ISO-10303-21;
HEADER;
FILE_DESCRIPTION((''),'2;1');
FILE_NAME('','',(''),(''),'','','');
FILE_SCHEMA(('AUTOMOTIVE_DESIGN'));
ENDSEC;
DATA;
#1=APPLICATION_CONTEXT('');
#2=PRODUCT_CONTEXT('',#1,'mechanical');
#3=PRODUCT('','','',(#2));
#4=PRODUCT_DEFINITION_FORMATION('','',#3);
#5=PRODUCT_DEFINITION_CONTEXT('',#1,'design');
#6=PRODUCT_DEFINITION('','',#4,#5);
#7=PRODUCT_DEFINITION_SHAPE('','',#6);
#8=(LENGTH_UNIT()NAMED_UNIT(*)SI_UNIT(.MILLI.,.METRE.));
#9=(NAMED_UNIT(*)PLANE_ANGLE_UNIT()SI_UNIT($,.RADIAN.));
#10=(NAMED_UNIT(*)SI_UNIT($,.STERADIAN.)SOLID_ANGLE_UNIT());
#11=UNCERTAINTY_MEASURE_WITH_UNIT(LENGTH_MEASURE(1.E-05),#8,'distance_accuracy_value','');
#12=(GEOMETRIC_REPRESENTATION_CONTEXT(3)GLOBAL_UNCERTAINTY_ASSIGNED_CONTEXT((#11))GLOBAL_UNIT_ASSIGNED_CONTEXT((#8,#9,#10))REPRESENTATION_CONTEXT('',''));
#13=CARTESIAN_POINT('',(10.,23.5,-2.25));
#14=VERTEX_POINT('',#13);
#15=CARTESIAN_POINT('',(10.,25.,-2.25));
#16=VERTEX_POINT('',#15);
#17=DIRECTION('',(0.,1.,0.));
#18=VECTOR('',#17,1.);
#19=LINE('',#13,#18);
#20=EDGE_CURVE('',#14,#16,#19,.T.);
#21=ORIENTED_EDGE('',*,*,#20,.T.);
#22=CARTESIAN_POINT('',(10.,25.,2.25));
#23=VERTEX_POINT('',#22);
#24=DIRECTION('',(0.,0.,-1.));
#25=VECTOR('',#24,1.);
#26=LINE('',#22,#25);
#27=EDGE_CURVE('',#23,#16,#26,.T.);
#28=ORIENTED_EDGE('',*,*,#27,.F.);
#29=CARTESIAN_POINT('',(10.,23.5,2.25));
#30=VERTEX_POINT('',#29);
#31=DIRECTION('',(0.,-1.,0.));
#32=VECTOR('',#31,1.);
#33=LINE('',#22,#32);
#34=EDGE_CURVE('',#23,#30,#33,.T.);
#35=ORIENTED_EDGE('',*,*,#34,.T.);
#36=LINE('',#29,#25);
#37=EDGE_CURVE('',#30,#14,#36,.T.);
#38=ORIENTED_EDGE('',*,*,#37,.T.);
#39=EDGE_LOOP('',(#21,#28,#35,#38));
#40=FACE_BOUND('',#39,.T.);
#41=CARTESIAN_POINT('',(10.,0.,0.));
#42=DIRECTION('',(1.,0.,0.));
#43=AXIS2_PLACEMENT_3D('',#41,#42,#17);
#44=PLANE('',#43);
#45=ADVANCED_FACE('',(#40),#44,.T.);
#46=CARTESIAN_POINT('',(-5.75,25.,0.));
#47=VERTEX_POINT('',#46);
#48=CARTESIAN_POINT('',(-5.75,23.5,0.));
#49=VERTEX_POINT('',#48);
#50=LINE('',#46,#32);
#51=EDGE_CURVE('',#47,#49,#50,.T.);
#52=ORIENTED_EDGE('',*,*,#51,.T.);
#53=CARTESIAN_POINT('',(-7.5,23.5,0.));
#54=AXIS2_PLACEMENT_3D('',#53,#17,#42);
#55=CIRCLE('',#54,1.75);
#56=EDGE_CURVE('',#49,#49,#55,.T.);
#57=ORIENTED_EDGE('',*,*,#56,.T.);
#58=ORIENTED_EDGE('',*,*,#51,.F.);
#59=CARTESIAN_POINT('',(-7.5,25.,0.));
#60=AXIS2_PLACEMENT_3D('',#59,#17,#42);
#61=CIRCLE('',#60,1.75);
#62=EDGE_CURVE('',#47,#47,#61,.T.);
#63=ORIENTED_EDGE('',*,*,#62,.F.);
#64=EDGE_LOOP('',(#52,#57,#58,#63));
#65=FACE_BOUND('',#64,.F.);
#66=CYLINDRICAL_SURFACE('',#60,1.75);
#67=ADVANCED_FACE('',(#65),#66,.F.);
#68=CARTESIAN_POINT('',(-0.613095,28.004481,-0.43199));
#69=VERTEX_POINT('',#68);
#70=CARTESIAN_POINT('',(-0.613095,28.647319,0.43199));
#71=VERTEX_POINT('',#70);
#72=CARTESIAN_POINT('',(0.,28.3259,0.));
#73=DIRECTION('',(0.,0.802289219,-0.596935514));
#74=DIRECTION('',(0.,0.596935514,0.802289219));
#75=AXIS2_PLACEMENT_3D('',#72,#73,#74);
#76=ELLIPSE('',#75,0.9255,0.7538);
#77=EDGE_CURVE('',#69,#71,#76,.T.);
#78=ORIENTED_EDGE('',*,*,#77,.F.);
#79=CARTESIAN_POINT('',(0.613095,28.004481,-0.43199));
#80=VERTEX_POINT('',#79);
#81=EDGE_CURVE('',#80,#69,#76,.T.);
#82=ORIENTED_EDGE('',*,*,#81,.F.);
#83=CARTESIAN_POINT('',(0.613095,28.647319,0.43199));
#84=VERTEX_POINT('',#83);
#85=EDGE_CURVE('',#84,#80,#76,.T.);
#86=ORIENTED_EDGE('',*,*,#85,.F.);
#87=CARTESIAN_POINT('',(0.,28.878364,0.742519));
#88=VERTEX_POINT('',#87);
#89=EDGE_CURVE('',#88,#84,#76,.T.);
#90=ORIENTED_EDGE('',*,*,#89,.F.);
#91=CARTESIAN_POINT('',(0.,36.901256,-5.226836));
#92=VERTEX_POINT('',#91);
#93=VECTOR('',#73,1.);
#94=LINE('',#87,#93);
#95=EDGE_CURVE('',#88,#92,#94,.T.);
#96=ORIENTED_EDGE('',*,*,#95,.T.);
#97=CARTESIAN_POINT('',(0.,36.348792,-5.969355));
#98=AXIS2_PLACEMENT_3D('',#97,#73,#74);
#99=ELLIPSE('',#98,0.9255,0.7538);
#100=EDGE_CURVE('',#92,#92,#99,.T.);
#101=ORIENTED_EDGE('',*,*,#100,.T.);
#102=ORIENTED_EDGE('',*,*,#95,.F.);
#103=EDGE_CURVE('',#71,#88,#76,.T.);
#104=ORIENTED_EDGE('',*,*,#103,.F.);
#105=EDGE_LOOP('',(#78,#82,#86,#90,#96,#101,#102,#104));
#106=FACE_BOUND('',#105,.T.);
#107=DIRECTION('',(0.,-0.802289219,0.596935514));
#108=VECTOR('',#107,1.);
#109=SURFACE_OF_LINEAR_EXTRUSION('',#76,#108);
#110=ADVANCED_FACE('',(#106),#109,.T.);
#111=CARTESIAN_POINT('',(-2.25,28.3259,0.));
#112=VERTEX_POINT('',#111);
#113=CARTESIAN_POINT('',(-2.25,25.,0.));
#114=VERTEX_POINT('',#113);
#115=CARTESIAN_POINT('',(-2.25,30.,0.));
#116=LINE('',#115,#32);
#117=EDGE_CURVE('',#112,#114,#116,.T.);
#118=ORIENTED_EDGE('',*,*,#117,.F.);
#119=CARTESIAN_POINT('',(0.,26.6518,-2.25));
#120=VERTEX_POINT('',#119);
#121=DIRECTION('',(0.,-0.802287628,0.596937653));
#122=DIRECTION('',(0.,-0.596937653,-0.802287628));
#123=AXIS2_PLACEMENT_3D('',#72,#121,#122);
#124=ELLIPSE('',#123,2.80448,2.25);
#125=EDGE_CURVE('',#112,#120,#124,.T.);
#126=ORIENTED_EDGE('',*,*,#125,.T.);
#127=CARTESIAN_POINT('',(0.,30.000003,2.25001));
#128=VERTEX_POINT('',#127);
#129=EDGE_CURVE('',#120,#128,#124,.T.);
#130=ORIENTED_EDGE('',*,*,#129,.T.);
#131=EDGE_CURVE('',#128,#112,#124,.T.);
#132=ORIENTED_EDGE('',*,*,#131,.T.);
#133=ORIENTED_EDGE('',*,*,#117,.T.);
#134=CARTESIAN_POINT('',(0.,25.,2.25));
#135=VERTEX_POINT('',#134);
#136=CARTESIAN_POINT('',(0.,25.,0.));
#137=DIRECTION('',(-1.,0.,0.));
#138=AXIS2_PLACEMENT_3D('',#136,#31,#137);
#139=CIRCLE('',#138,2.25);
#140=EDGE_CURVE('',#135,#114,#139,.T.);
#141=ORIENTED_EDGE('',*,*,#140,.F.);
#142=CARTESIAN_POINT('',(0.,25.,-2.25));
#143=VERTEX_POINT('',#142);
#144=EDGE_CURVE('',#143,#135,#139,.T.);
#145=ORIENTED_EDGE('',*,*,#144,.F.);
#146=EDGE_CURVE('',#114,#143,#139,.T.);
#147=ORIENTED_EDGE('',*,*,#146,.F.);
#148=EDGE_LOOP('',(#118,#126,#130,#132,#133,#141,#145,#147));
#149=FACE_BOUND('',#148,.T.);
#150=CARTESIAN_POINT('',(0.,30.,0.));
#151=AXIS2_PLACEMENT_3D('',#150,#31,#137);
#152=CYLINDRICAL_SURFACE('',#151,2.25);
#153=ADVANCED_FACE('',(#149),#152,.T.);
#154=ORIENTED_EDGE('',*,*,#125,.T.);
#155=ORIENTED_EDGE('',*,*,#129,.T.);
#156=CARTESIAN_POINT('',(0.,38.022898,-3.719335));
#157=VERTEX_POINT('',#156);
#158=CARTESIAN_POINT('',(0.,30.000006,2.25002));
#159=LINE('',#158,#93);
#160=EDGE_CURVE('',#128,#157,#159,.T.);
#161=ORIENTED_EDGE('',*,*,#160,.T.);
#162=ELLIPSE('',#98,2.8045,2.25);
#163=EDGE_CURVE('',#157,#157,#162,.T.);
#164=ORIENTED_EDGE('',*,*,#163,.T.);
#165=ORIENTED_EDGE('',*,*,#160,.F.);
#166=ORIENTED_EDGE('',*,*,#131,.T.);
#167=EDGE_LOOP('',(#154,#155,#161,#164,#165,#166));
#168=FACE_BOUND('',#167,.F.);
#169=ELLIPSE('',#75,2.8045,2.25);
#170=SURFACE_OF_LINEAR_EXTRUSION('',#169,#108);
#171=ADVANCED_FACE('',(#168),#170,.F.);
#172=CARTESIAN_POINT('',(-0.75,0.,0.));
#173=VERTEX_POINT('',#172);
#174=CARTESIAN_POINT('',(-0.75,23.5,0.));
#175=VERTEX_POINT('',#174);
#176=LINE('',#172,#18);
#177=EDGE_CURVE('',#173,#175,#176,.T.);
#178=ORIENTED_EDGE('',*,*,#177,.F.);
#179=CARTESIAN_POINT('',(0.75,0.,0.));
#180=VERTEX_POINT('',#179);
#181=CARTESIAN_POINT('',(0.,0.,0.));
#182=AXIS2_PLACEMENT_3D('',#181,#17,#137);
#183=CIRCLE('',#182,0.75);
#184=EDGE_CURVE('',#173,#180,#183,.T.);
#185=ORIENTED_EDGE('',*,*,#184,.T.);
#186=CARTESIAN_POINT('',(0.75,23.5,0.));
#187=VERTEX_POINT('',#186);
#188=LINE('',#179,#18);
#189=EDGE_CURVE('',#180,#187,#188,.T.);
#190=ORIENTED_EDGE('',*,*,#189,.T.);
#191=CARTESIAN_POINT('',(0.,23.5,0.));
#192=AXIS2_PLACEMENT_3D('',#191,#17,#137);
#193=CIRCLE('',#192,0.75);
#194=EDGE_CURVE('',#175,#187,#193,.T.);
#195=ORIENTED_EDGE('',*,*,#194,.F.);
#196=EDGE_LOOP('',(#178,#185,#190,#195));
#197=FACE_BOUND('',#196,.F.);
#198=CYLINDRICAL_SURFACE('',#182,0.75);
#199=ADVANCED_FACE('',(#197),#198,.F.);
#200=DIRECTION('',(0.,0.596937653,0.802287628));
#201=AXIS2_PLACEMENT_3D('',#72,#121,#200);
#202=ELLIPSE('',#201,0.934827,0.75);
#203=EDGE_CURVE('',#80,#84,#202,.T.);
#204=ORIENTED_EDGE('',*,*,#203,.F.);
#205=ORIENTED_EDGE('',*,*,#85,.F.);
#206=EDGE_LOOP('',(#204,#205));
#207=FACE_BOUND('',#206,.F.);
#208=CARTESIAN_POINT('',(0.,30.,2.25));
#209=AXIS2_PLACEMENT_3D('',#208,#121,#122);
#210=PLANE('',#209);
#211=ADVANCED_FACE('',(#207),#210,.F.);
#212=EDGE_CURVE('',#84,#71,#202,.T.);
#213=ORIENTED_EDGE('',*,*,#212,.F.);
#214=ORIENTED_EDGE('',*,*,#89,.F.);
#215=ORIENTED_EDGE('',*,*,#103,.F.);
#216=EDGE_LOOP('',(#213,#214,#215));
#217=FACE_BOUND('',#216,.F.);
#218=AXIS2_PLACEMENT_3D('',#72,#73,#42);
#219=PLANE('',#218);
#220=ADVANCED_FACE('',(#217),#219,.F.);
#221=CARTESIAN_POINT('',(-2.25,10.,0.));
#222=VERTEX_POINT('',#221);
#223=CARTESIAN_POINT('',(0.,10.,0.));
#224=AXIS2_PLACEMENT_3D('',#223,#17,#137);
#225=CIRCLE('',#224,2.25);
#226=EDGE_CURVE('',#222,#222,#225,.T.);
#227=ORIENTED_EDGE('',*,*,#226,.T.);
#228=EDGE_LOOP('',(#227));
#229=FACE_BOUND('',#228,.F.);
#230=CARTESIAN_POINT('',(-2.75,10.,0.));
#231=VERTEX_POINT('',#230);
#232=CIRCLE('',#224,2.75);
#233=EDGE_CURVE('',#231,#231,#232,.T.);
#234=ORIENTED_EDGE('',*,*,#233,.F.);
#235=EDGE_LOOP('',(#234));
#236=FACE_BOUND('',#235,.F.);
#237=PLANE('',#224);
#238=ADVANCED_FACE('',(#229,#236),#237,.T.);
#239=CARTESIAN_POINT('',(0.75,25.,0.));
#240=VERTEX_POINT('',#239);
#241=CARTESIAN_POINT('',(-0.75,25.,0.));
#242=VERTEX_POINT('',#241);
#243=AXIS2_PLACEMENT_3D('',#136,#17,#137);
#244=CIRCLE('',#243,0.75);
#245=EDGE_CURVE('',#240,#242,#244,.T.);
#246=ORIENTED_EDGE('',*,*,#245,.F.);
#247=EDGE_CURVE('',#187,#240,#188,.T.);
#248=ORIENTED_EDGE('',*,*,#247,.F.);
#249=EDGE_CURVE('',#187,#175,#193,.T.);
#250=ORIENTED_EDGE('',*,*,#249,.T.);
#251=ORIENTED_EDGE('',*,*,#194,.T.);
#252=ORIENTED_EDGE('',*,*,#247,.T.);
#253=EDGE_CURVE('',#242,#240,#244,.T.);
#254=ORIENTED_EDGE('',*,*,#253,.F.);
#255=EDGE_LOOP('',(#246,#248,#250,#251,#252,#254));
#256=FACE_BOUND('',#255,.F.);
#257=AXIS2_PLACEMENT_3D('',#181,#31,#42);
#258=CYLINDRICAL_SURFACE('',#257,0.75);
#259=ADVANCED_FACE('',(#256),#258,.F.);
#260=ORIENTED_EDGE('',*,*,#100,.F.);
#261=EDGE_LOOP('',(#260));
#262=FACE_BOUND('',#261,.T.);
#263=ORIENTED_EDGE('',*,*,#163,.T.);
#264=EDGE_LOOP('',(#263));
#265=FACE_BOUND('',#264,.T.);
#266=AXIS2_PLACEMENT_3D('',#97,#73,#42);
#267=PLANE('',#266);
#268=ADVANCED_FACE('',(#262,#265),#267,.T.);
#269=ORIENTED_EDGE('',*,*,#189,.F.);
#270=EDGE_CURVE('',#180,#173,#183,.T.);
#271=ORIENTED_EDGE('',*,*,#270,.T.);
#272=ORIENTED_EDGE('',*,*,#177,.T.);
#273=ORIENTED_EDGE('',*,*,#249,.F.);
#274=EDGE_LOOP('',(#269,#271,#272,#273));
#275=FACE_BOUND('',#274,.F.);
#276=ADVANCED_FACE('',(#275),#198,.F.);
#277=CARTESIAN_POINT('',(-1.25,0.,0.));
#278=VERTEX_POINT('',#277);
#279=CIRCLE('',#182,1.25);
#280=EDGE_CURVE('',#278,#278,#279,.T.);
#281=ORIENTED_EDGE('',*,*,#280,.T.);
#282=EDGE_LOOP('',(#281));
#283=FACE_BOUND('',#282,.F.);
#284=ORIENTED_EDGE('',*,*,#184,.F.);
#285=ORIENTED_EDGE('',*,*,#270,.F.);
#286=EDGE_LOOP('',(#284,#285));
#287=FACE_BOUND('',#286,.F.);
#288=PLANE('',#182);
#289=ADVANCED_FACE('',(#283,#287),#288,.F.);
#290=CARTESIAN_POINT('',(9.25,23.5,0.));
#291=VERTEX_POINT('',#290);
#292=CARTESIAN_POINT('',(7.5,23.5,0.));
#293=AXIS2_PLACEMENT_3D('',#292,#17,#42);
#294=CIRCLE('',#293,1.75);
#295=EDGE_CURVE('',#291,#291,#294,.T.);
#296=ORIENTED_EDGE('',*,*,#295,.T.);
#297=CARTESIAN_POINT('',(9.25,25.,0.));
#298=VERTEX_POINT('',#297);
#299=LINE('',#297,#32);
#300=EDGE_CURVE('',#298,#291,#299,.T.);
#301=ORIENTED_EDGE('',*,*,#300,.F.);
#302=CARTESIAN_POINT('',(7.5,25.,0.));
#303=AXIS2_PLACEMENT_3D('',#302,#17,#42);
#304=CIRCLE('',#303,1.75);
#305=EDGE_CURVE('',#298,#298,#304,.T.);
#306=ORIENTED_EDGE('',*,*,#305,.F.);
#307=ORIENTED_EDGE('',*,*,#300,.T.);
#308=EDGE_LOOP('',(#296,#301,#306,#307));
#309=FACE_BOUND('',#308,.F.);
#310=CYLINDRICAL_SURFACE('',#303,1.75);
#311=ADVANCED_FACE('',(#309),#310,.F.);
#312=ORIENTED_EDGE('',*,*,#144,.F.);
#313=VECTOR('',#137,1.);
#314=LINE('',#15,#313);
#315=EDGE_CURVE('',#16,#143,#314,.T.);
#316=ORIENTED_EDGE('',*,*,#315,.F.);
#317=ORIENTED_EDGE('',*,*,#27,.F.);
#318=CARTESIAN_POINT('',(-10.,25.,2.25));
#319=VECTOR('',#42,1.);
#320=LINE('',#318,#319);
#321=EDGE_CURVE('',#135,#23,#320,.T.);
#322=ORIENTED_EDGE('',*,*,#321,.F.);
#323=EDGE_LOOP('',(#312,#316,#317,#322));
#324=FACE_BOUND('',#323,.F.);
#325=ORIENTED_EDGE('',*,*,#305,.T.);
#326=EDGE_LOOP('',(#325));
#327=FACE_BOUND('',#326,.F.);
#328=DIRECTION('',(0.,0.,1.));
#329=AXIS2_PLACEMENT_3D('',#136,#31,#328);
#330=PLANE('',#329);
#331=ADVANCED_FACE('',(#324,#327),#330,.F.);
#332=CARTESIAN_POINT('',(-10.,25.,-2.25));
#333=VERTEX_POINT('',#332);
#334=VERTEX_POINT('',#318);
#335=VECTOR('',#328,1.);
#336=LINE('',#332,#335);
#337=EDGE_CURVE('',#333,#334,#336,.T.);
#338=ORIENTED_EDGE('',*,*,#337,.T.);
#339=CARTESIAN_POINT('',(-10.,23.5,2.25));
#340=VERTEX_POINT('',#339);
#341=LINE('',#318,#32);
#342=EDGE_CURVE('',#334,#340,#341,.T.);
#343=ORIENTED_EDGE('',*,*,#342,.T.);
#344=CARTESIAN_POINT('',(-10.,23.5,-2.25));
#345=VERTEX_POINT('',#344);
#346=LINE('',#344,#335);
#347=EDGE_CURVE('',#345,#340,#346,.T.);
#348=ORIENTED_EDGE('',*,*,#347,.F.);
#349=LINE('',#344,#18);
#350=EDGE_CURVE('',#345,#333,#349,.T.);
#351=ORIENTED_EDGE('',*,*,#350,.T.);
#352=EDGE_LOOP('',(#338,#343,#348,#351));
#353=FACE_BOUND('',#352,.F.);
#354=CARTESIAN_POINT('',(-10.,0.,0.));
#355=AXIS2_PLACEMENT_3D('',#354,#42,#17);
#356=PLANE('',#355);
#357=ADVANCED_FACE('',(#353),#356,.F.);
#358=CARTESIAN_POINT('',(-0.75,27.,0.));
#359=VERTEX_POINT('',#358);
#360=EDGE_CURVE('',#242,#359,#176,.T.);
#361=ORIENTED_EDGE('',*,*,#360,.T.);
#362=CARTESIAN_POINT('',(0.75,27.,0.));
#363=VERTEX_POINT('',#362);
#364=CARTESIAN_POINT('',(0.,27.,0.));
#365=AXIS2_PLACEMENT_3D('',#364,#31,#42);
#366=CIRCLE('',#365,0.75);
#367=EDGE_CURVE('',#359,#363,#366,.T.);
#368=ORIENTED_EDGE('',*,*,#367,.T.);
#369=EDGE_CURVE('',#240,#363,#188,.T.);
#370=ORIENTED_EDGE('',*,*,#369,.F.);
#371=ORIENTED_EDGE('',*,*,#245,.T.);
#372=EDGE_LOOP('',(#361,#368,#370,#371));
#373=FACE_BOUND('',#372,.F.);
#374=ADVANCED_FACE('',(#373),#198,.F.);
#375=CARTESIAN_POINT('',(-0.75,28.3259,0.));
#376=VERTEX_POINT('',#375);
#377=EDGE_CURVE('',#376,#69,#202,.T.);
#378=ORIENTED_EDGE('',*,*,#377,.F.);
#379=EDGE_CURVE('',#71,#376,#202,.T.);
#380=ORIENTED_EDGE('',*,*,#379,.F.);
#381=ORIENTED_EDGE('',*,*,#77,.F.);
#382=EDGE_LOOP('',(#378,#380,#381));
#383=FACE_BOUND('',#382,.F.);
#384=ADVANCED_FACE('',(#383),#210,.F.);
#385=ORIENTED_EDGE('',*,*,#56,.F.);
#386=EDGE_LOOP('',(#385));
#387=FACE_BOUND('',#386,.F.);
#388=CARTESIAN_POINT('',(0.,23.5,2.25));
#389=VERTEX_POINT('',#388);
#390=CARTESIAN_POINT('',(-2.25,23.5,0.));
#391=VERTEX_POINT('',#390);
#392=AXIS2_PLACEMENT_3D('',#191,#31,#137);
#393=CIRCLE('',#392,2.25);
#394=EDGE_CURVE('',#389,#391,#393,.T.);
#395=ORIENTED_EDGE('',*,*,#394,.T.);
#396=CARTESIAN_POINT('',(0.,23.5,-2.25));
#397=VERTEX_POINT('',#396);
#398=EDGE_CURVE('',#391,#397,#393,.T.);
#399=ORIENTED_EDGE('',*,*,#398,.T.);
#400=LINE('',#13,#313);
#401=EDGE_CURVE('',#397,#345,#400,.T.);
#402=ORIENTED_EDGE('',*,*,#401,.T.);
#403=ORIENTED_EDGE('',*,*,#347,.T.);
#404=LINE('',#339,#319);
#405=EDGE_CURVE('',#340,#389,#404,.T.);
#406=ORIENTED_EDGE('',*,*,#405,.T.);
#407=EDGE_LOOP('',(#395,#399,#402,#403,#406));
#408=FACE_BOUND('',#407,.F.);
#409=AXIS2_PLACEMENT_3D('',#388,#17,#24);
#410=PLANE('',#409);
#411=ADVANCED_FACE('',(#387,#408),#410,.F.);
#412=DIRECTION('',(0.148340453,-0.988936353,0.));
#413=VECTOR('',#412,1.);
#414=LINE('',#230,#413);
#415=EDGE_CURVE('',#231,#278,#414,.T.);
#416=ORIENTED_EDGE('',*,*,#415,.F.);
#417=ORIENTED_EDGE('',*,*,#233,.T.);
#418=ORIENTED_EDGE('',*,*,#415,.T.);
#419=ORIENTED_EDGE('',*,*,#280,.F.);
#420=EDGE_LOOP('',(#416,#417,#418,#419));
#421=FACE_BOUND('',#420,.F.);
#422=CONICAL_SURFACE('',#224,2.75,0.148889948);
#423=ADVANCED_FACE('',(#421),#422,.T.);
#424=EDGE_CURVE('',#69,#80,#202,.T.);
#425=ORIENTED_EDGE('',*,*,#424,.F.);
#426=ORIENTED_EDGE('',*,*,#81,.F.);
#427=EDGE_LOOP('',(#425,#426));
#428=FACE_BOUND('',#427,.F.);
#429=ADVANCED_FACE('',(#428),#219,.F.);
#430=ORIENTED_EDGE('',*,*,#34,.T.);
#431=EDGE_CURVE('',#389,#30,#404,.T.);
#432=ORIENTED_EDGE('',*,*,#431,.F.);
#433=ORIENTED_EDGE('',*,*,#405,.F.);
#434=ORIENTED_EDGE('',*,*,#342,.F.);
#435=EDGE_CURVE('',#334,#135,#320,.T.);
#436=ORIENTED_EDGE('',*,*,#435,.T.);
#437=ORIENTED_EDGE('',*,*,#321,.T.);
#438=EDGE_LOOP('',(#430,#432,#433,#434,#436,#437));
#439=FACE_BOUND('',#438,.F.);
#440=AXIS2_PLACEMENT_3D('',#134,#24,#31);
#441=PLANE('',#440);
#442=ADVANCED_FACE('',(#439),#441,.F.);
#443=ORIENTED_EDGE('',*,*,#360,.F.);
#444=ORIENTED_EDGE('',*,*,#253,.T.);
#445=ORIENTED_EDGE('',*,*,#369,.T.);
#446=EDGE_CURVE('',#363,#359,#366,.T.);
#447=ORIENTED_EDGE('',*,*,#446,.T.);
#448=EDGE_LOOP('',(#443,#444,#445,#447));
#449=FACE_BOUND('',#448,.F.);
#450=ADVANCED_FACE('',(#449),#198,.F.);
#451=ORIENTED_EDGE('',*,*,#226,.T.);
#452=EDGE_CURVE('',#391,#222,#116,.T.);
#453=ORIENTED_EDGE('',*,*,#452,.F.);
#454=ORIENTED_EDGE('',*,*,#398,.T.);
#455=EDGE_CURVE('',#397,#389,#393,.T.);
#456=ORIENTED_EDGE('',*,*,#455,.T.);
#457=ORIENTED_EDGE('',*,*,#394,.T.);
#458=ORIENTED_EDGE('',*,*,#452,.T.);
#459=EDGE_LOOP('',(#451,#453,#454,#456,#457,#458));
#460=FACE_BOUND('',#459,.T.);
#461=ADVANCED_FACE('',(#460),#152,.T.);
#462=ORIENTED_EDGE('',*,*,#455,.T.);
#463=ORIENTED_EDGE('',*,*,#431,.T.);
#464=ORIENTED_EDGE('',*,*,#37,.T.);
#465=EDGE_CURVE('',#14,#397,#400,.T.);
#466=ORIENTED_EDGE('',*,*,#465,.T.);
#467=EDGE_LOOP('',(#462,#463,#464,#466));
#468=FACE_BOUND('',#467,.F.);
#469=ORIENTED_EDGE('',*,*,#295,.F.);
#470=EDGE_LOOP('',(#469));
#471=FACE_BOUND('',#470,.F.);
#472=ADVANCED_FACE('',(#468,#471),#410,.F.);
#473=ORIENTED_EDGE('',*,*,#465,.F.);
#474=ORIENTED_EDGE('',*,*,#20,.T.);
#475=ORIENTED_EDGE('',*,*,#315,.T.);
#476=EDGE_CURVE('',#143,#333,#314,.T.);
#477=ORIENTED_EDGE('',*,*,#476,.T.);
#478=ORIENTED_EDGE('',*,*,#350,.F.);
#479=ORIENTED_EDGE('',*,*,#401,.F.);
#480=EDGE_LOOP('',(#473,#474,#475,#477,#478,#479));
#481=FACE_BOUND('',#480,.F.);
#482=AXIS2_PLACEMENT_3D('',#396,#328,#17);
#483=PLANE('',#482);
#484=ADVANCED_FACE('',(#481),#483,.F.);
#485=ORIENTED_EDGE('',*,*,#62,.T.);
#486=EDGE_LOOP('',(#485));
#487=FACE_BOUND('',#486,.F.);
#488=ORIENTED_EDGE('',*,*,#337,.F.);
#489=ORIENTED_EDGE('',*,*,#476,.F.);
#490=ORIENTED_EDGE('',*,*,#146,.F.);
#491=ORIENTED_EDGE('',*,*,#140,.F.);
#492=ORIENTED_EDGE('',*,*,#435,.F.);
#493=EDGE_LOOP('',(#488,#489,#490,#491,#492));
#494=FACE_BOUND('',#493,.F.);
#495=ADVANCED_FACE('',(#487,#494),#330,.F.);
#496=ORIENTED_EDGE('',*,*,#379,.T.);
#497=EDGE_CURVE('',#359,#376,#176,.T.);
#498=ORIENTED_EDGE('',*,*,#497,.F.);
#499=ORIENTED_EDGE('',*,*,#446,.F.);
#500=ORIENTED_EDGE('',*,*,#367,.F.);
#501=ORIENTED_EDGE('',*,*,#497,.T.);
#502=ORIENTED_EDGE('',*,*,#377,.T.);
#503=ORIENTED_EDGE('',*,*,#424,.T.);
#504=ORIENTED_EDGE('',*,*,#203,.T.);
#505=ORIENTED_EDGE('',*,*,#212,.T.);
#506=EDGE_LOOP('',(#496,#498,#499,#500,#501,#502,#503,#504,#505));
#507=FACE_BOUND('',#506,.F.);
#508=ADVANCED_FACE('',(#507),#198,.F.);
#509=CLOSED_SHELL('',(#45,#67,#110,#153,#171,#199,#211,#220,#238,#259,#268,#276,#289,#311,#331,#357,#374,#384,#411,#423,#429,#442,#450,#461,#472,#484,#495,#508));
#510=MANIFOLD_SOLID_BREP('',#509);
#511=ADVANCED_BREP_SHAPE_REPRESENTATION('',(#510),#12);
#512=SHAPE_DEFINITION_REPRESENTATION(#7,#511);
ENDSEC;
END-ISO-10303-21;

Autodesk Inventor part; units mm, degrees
ref_plane "YZ Plane" through (0, 0, 0) normal (1, 0, 0) x (0, 1, 0)
ref_plane "XY Plane" through (0, 0, 0) normal (0, 0, 1) x (1, 0, 0)
sketch "Skizze1" plane through (0, 0, 0) normal (0, 0, 1) x (1, 0, 0)
  line L0 (-3.3, 0) -> (0.55, 0) projected
  line L1 (0, -6) -> (0, 36) projected
  line L2 (-1.25, 0) -> (-0.75, 0)
  line L3 (-0.75, 0) -> (-0.75, 30)
  line L4 (-0.75, 30) -> (-2.25, 30)
  line L5 (-2.25, 30) -> (-2.25, 10)
  line L6 (-2.25, 10) -> (-2.75, 10)
  line L7 (-2.75, 10) -> (-1.25, 0)
  point P0 (0, 0)
  dimension "d0" = 1.5
  dimension "d1" = 0.5
  dimension "d2" = 0.5
  dimension "d3" = 0.75
  dimension "d6" = 30
  dimension "d7" = 10
revolve "Umdrehung1" add sketch "Skizze1" angle 360 about axis through (0, -10, 0) along (0, 1, 0)
ref_plane "Arbeitsebene1" through (0, 50, 0) normal (0, 1, 0) x (-1, 0, 0)
sketch "Skizze3" plane through (0, 0, 0) normal (1, 0, 0) x (0, 1, 0)
  line L0 (30, -2.25) -> (30, 2.25) projected
  line L1 (30, 2.25) -> (26.6518, -2.25)
  line L2 (10, -2.25) -> (30, -2.25) projected
  line L3 (30, 2.25) -> (30, -2.25)
  line L4 (30, -2.25) -> (26.6518, -2.25)
  point P0 (0, 0)
extrude "Extrusion1" cut sketch "Skizze3" against normal mid plane 10
sketch "Skizze4" plane through (0, 28.3259, 0) normal (0, 0.8022892, -0.5969355) x (1, 0, 0)
  ellipse E0 centre (0, 0) end of major axis (0, -2.8045) minor radius 2.25 projected
  ellipse E1 centre (0, 0) end of major axis (0, -2.8045) minor radius 2.25
  ellipse E2 centre (0, 0) end of major axis (0, -0.9255) minor radius 0.7538
  point P0 (0, 16.9087)
extrude "Extrusion2" add sketch "Skizze4" along normal blind 10
sketch "Skizze5" plane through (0, 0, 0) normal (1, 0, 0) x (0, 1, 0)
  line L0 (25, 2.25) -> (23.5, 2.25)
  line L1 (23.5, 2.25) -> (23.5, -2.25)
  line L2 (23.5, -2.25) -> (25, -2.25)
  line L3 (25, -2.25) -> (25, 2.25)
  line L4 (-7.6046, 0) -> (45.6275, 0) projected
  line L5 (0, -10.4132) -> (0, 4.9439) projected
  point P0 (0, 0)
  dimension "d23" = 4.5
  dimension "d24" = 2.25
  dimension "d25" = 25
  dimension "d26" = 1.5
extrude "Extrusion3" add sketch "Skizze5" along normal mid plane 20
sketch "Skizze6" plane through (0, 0, 0) normal (0, -1, 0) x (1, 0, 0)
  circle A0 centre (0, 0) radius 0.75
extrude "Extrusion4" cut sketch "Skizze6" against normal blind 27
sketch "Skizze7" plane through (0, 25, 2.25) normal (0, 1, 0) x (1, 0, 0)
  circle A0 centre (7.5, 2.25) radius 1.75
  circle A1 centre (-7.5, 2.25) radius 1.75
  line L0 (10, 4.5) -> (10, 0) projected
  point P0 (0, 2.25)
  dimension "d31" = 3.5
  dimension "d32" = 3.5
  dimension "d33" = 15
  dimension "d34" = 2.5
extrude "Extrusion5" cut sketch "Skizze7" against normal blind 5
properties part number "Düse"
